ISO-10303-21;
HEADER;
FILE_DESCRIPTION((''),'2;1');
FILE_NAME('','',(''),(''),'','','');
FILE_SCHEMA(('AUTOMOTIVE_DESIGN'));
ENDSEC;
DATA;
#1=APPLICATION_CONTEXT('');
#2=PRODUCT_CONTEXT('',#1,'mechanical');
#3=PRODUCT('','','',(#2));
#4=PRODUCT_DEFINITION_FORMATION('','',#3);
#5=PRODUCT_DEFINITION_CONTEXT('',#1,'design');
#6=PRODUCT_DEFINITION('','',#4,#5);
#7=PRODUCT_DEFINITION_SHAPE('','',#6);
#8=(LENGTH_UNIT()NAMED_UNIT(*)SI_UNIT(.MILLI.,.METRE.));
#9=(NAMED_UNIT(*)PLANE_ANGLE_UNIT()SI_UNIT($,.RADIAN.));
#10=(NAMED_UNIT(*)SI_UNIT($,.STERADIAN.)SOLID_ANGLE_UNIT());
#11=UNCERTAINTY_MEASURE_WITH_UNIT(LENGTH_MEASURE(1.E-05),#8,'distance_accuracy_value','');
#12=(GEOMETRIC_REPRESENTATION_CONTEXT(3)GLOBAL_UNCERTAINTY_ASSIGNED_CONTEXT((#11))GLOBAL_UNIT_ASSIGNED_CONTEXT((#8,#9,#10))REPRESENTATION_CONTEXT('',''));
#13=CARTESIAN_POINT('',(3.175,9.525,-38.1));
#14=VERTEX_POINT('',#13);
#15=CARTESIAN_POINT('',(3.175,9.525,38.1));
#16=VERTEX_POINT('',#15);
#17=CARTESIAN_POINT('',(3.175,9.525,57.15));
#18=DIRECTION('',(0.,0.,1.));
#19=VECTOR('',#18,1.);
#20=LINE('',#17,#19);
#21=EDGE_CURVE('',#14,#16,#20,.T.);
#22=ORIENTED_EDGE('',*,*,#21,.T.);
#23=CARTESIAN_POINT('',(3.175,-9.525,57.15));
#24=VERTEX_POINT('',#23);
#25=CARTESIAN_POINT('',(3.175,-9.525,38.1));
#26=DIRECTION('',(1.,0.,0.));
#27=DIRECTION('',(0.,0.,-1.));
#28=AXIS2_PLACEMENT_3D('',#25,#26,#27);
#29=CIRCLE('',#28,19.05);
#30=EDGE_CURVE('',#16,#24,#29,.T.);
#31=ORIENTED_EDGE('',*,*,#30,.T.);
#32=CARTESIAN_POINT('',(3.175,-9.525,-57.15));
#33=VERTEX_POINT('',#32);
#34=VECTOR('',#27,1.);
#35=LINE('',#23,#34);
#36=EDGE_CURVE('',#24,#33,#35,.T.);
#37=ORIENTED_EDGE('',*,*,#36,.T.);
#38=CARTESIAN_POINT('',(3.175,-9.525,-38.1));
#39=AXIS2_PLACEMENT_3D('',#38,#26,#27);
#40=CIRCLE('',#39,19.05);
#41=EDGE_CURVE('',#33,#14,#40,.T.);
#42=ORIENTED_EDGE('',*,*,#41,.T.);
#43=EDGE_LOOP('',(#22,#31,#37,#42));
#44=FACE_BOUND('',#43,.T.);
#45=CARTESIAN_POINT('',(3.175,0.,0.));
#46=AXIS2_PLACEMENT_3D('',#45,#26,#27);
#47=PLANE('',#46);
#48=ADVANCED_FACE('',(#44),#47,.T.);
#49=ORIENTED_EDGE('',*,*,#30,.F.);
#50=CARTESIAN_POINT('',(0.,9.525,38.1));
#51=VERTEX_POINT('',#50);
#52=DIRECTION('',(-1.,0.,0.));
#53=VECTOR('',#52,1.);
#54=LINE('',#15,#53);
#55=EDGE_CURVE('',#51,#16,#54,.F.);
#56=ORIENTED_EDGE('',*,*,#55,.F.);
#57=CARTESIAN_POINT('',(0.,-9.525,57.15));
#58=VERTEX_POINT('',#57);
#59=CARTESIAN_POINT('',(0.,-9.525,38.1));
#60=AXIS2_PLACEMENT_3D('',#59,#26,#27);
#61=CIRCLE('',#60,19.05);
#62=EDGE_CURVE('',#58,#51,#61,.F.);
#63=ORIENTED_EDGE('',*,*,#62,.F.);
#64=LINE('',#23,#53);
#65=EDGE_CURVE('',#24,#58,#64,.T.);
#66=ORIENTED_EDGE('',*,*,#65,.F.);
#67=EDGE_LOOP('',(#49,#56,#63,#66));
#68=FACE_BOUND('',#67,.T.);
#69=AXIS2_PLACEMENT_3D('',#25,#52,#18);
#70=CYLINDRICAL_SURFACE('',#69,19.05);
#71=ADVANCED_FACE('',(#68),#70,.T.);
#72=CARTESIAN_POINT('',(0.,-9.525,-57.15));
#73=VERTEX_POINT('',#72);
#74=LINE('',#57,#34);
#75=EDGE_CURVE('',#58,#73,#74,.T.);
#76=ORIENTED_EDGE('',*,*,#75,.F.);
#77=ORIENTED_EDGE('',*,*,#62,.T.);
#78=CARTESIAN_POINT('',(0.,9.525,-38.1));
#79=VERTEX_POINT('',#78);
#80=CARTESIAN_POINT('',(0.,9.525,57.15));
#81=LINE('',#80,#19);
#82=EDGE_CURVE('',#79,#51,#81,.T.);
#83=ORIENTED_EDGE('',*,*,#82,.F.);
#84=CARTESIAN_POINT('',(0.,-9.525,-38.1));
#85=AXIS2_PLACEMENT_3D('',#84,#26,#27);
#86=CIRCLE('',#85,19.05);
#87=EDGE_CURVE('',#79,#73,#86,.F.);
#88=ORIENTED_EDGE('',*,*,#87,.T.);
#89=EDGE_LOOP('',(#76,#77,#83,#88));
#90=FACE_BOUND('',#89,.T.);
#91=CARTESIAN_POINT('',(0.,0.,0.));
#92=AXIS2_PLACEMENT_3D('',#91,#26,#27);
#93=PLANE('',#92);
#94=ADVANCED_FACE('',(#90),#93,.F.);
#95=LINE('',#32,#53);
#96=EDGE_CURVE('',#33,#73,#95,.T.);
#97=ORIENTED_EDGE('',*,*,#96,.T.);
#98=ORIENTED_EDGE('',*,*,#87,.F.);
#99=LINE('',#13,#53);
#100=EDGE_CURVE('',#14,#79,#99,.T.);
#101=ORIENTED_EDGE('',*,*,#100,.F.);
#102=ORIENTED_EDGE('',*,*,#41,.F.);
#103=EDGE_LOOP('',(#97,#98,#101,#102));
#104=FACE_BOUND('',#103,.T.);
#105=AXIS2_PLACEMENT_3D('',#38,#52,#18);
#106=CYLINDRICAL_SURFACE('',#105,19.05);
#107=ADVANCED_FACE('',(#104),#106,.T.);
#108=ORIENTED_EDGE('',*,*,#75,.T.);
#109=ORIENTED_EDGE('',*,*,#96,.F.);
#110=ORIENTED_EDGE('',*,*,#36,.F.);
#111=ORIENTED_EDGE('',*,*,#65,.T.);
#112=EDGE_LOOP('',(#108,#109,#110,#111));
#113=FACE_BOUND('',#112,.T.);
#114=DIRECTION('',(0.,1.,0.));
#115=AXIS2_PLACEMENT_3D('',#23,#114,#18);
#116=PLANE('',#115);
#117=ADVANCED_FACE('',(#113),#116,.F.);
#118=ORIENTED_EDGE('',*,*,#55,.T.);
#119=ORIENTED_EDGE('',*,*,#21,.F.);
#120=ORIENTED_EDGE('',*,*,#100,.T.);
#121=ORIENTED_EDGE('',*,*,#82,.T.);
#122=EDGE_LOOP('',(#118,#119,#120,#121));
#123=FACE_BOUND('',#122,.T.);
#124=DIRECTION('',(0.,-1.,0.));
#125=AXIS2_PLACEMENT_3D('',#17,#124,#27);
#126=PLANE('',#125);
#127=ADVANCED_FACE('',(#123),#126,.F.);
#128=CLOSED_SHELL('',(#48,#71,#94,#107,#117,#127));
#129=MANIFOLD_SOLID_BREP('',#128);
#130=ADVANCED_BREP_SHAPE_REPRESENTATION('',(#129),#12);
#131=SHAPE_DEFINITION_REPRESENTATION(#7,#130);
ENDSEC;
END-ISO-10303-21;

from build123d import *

# Parameters (mm, degrees)
SKETCH1_W           = 114.3
SKETCH1_H           = 19.05
BOSS_EXTRUDE1_DEPTH = 3.175
FILLET1_R           = 19.05


with BuildPart() as part:
    # Sketch1 → Boss-Extrude1 (new body)
    with BuildSketch(Plane(origin=(0, 0, 0), x_dir=(0, 0, -1), z_dir=(1, 0, 0))):
        Rectangle(SKETCH1_W, SKETCH1_H)
    extrude(amount=BOSS_EXTRUDE1_DEPTH)

    # Fillet1
    fillet1_edges = [part.edges().sort_by_distance(p)[0] for p in [
        (1.5875, 9.525, -57.15),
        (1.5875, 9.525, 57.15),
    ]]
    fillet(fillet1_edges, radius=FILLET1_R - 0.0001)  # a hair under: the kernel refuses the full size


solid = part.part
